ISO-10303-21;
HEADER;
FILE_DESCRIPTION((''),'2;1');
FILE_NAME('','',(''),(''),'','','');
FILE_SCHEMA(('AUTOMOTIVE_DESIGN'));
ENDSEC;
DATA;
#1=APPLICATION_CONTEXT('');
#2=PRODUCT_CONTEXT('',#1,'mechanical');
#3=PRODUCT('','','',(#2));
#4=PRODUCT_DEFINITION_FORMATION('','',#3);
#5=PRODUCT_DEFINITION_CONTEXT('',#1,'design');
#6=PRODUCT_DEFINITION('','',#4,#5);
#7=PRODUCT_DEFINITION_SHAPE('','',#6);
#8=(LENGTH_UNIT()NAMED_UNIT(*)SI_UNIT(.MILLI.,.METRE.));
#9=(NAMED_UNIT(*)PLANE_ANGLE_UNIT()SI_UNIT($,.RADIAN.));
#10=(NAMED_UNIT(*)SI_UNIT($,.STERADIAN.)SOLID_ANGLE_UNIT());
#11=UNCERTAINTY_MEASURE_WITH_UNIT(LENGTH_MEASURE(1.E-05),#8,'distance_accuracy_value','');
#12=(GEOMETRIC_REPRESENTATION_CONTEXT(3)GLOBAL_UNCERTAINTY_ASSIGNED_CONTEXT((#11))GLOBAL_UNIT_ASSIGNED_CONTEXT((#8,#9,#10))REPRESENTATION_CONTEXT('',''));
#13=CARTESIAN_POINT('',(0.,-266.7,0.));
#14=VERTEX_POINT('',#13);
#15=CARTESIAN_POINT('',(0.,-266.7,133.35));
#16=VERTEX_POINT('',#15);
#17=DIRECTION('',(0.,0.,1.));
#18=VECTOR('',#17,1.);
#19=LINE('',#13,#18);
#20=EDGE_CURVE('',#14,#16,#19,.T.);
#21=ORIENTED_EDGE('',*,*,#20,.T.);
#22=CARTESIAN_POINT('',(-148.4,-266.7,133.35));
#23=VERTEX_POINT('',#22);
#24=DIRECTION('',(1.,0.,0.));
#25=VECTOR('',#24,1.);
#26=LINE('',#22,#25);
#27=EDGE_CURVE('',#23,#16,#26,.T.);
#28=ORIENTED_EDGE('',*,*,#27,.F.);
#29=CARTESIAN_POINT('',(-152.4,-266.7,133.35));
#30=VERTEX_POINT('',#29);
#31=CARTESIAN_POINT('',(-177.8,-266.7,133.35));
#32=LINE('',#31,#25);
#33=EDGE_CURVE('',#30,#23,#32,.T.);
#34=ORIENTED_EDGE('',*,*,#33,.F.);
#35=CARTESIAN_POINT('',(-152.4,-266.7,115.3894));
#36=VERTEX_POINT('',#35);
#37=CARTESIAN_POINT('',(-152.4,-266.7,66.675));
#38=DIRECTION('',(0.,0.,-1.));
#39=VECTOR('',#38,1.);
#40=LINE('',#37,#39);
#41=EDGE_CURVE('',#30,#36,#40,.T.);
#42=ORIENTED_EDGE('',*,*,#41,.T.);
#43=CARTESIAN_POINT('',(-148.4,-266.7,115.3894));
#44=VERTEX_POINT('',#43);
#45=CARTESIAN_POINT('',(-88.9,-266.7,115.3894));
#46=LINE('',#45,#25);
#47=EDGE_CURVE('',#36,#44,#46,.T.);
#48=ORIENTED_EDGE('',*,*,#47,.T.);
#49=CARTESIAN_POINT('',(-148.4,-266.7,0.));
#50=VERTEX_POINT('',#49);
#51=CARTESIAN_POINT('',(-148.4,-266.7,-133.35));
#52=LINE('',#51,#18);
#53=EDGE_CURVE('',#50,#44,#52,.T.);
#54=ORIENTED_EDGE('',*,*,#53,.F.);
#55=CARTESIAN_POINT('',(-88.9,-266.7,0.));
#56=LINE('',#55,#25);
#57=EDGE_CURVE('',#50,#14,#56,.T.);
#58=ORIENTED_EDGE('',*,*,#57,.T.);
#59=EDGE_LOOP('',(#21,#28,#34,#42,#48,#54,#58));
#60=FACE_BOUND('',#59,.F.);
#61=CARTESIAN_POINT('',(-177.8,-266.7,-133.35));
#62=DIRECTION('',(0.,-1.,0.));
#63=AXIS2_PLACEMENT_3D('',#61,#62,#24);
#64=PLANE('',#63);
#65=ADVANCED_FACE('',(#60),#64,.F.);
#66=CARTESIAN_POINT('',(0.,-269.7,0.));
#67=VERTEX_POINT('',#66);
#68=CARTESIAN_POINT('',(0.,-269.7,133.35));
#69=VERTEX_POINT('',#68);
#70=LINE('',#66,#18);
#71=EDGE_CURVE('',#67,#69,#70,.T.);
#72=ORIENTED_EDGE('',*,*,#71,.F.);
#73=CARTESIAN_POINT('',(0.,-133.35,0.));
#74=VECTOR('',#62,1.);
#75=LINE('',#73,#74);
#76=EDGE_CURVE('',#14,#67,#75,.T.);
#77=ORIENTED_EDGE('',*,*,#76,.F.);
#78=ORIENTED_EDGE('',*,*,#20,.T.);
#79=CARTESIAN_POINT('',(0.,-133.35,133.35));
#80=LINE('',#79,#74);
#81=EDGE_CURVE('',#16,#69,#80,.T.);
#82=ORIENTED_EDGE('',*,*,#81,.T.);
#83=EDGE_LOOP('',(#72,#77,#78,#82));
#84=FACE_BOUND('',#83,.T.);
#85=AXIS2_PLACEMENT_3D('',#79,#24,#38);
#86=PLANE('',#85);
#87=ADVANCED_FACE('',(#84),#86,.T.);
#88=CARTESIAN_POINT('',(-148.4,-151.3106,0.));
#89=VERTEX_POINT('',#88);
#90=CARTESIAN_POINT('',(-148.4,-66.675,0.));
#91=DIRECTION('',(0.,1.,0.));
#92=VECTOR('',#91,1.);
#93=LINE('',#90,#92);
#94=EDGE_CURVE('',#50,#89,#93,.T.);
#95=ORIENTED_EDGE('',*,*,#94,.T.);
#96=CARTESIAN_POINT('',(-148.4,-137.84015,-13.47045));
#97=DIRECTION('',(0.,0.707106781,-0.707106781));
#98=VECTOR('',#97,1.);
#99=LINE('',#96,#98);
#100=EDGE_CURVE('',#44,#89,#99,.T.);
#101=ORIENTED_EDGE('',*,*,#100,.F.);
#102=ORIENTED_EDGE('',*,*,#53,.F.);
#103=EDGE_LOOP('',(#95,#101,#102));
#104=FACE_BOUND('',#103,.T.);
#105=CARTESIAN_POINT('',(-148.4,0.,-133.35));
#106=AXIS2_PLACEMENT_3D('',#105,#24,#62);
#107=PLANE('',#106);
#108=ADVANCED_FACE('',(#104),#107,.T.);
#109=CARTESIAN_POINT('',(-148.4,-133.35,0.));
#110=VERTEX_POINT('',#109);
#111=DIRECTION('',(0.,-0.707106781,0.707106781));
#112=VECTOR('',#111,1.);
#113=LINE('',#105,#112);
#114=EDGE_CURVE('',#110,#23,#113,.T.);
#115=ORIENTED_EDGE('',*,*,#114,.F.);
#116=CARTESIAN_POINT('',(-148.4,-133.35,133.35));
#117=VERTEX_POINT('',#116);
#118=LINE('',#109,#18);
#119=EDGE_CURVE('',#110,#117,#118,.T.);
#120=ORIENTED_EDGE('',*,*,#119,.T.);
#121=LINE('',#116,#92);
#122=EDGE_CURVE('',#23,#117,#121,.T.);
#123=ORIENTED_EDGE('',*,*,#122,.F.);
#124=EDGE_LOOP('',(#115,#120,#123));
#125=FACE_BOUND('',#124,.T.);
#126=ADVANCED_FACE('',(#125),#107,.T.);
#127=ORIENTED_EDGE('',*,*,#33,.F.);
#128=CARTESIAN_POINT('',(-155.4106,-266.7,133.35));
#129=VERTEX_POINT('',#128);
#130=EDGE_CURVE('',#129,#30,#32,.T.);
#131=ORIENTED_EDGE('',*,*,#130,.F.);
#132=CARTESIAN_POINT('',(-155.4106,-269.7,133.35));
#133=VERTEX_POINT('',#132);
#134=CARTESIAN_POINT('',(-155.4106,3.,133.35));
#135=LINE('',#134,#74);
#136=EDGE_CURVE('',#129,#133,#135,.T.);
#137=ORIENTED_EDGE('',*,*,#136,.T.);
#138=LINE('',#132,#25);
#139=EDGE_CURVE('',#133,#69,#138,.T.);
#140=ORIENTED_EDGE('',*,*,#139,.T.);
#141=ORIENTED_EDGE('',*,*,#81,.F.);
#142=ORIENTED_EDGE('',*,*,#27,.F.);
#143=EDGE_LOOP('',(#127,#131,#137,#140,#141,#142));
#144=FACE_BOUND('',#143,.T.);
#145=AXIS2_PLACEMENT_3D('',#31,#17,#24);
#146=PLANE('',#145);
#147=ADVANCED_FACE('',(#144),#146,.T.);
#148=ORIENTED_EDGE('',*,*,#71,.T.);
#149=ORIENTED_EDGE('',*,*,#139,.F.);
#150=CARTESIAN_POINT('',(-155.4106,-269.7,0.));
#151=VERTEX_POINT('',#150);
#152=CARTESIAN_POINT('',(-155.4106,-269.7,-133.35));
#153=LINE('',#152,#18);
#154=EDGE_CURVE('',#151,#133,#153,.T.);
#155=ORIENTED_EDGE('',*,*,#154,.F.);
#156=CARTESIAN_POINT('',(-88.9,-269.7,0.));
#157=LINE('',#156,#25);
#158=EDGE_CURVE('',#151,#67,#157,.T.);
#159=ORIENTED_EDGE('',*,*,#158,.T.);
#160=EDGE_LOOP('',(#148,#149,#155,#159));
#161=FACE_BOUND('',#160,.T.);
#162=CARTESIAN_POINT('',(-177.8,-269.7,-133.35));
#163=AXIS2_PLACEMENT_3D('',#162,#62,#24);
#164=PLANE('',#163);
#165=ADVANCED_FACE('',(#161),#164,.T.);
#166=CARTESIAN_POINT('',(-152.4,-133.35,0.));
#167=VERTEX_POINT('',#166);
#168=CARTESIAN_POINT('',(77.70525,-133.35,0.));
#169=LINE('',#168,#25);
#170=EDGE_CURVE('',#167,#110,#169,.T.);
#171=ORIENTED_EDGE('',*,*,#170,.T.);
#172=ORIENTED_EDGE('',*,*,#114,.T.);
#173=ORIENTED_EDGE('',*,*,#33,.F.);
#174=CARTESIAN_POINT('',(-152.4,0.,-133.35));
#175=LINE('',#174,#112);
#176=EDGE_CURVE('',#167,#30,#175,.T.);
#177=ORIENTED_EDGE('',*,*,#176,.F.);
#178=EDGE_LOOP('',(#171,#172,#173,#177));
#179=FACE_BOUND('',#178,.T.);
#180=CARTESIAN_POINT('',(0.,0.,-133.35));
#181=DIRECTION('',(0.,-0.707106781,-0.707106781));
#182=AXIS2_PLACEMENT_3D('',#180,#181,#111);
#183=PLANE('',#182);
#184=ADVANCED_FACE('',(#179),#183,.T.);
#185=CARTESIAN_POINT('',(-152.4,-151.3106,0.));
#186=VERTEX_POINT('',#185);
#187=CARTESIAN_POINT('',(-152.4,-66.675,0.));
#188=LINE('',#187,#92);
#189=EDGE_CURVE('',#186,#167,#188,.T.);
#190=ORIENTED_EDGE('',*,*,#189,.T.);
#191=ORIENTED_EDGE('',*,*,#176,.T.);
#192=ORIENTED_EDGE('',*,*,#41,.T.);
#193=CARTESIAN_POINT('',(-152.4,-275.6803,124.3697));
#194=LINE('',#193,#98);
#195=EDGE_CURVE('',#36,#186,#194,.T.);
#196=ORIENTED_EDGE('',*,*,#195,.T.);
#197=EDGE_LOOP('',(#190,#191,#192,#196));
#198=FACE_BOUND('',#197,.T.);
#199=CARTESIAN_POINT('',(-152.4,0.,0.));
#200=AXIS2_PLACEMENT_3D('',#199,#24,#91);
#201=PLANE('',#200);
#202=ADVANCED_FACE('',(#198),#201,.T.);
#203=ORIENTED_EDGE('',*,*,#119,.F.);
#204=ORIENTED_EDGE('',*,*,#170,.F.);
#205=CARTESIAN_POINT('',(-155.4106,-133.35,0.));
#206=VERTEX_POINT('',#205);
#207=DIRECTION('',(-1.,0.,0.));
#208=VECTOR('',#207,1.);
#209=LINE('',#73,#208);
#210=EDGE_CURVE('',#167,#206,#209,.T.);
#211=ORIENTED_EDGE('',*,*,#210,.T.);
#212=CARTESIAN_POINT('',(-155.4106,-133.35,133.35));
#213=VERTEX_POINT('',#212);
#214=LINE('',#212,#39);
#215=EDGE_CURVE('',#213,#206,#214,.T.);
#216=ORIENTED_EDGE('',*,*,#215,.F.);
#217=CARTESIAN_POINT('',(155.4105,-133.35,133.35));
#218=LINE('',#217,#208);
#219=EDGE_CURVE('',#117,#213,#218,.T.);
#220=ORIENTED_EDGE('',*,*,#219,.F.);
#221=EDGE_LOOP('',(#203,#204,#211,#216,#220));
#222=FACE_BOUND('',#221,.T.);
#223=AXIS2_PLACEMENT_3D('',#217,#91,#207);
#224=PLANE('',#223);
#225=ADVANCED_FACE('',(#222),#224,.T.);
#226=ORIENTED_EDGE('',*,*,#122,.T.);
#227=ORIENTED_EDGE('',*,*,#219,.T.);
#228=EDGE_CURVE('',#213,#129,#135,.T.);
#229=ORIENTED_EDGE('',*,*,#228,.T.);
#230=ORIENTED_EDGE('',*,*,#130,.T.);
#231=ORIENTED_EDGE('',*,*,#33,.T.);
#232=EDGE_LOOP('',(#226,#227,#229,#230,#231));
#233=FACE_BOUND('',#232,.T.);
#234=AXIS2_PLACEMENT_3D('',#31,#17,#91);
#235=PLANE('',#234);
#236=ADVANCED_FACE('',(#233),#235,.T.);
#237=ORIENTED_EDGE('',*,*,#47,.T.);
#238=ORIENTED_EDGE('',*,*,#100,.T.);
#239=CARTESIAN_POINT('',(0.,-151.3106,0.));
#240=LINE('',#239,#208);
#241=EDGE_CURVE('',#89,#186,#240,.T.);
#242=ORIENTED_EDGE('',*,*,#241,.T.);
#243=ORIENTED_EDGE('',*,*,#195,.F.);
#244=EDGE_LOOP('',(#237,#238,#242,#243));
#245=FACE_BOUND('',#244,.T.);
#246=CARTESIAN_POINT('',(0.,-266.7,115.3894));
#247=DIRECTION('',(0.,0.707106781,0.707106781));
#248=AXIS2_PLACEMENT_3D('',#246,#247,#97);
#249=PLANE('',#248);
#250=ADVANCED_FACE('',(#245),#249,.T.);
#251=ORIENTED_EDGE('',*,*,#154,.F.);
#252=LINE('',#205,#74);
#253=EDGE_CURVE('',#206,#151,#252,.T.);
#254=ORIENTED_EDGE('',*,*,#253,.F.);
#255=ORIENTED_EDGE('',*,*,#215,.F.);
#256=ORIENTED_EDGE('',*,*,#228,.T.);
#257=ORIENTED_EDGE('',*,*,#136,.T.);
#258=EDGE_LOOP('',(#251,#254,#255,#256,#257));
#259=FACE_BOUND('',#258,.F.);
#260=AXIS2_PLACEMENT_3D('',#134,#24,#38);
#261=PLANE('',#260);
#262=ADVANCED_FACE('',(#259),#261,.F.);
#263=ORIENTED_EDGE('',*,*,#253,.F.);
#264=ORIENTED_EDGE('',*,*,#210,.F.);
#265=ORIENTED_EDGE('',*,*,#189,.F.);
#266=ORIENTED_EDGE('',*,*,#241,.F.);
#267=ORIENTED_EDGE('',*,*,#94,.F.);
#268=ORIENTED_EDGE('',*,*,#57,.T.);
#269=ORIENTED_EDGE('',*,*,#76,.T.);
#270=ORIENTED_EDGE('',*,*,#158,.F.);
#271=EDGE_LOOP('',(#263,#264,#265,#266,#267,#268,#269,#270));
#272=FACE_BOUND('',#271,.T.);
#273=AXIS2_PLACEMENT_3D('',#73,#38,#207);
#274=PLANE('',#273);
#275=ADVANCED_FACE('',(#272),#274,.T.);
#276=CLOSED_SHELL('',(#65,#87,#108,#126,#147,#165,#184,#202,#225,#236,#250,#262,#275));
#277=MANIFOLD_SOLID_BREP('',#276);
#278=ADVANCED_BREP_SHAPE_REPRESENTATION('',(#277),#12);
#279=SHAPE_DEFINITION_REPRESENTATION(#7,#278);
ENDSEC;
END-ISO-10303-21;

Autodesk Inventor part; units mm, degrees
ref_plane "YZ Plane" through (0, 0, 0) normal (1, 0, 0) x (0, 1, 0)
ref_plane "XZ Plane" through (0, 0, 0) normal (0, 1, 0) x (-1, 0, 0)
ref_plane "XY Plane" through (0, 0, 0) normal (0, 0, 1) x (1, 0, 0)
sketch "Sketch1" plane through (0, 0, 0) normal (0, 1, 0) x (-1, 0, 0)
  line L0 (110, -80) -> (-110, -80)
  line L1 (-110, -80) -> (-110, 80)
  line L2 (-110, 80) -> (110, 80)
  line L3 (110, 80) -> (110, -80)
  line L4 (320.2117, -53.5522) -> (168.036, -53.5522) construction
  line L5 (168.036, -53.5522) -> (168.036, 90.1689) construction
  line L6 (168.036, 90.1689) -> (320.2117, 90.1689) construction
  line L7 (320.2117, 90.1689) -> (320.2117, -53.5522) construction
  line L8 (124.3, -89.75) -> (-124.3, -89.75) construction
  line L9 (-124.3, -89.75) -> (-124.3, 89.75) construction
  line L10 (-124.3, 89.75) -> (124.3, 89.75) construction
  line L11 (124.3, 89.75) -> (124.3, -89.75) construction
  line L12 (124.3, -89.75) -> (-124.3, 89.75) construction
  line L13 (-124.3, -89.75) -> (124.3, 89.75) construction
  line L14 (-152.4, -107.95) -> (152.4, -107.95)
  line L15 (152.4, -107.95) -> (152.4, 107.95)
  line L16 (152.4, 107.95) -> (-152.4, 107.95)
  line L17 (-152.4, 107.95) -> (-152.4, -107.95)
  line L18 (-152.4, -107.95) -> (152.4, 107.95) construction
  line L19 (152.4, -107.95) -> (-152.4, 107.95) construction
  line L20 (177.8, 133.35) -> (177.8, -133.35)
  line L21 (177.8, -133.35) -> (-177.8, -133.35)
  line L22 (-177.8, -133.35) -> (-177.8, 133.35)
  line L23 (-177.8, 133.35) -> (177.8, 133.35)
  point P0 (0, 0)
  dimension "d11" = 220
  dimension "d12" = 160
  dimension "d15" = 248.6
  dimension "d16" = 179.5
  dimension "d18" = 304.8
  dimension "d19" = 215.9
  dimension "d22" = 25.4
extrude "Top" add sketch "Sketch1" along normal blind 25.4 contours L17 L16 L15 L14 | L20 L21 L22 L23
sketch "Sketch3" plane through (177.8, 0, 133.35) normal (1, 0, 0) x (0, 0, -1)
  line L0 (0, 0) -> (0, 25.4) projected
  line L1 (266.7, 0) -> (266.7, 25.4) projected
  line L2 (0, 0) -> (266.7, 0)
  line L3 (266.7, 0) -> (266.7, -266.7)
  line L4 (266.7, -266.7) -> (0, -266.7)
  line L5 (0, -266.7) -> (0, 0)
  point P0 (133.35, 0)
  dimension "d25" = 266.7
extrude "Right" add sketch "Sketch3" against normal blind 50.8
sketch "Sketch4" plane through (-177.8, 0, -133.35) normal (-1, 0, 0) x (0, 0, 1)
  line L0 (0, 0) -> (0, 25.4) projected
  line L1 (266.7, -266.7) -> (266.7, 0) projected
  line L2 (0, 0) -> (266.7, 0)
  line L3 (266.7, 0) -> (266.7, -266.7)
  line L4 (266.7, -266.7) -> (0, -266.7)
  line L5 (0, -266.7) -> (0, 0)
  point P0 (133.35, 0)
  dimension "d28" = 266.7
extrude "Left" add sketch "Sketch4" against normal blind 50.8
sketch "Sketch5" plane through (0, 0, 0) normal (1, 0, 0) x (0, 1, 0)
  line L0 (-266.7, -133.35) -> (25.4, -133.35) projected
  line L1 (-266.7, 133.35) -> (-266.7, -133.35) projected
  line L2 (0, -133.35) -> (-266.7, 133.35)
  line L3 (-266.7, 133.35) -> (-275.6803, 124.3697)
  line L4 (-275.6803, 124.3697) -> (-8.9803, -142.3303)
  line L5 (-8.9803, -142.3303) -> (0, -133.35)
  point P0 (0, 0)
  dimension "d31" = 12.7
extrude "Plexiglass Cut" cut sketch "Sketch5" along normal mid plane 304.8 contours L4 L1 L2 L0 | L0 L5 L4 | L4 L3 L1
sketch "Sketch6" plane through (-177.8, -266.7, -133.35) normal (0, -1, 0) x (1, 0, 0)
  line L0 (0, 0) -> (0, 266.7) projected
  line L1 (355.6, 0) -> (0, 0) projected
  line L2 (0, 266.7) -> (355.6, 266.7)
  line L3 (355.6, 266.7) -> (355.6, 0)
  line L4 (355.6, 0) -> (0, 0)
  line L5 (0, 0) -> (0, 266.7)
  point P0 (177.8, 133.35)
extrude "Bottom" add sketch "Sketch6" along normal blind 25.4
sketch "Sketch9" plane through (0, 25.4, 0) normal (0, 1, 0) x (1, 0, 0)
  line L0 (177.8, -133.35) -> (127, -133.35) projected
  line L1 (177.8, 133.35) -> (-177.8, 133.35) projected
  line L2 (177.8, -133.35) -> (-177.8, -133.35)
  line L3 (-177.8, -133.35) -> (-177.8, 133.35)
  line L4 (-177.8, 133.35) -> (177.8, 133.35)
  line L5 (177.8, 133.35) -> (177.8, -133.35)
  point P0 (0, 0)
extrude "Top Flattening" cut sketch "Sketch9" against normal blind 22.4
sketch "Sketch10" plane through (0, 3, 0) normal (0, 1, 0) x (1, 0, 0)
  line L0 (-177.8, -133.35) -> (-177.8, 133.35) projected
  line L1 (-155.4106, 133.35) -> (-177.8, 133.35)
  line L2 (-177.8, 133.35) -> (-177.8, -133.35)
  line L3 (-177.8, -133.35) -> (-155.4106, -133.35)
  line L4 (-155.4106, -133.35) -> (-155.4106, 133.35)
  line L5 (177.8, 133.35) -> (177.8, -133.35)
  line L6 (177.8, -133.35) -> (155.4106, -133.35)
  line L7 (155.4106, -133.35) -> (155.4106, 133.35)
  line L8 (155.4106, 133.35) -> (177.8, 133.35)
  line L9 (152.4, -115.3895) -> (152.4, 133.35) projected
  point P0 (0, 0)
  point P1 (-177.8, 0)
  dimension "d48" = 22.3894
  dimension "d49" = 22.3894
extrude "Outer Side Flattening" cut sketch "Sketch10" against normal through all
sketch "Sketch11" plane through (-177.8, -292.1, -133.35) normal (0, -1, 0) x (1, 0, 0)
  line L0 (22.3894, 0) -> (333.2106, 0) projected
  line L1 (333.2106, 0) -> (22.3894, 0)
  line L2 (22.3894, 0) -> (22.3894, 266.7)
  line L3 (22.3894, 266.7) -> (333.2106, 266.7)
  line L4 (333.2106, 266.7) -> (333.2106, 0)
  point P0 (177.8, 133.35)
extrude "Bottom Flattening" cut sketch "Sketch11" against normal blind 22.4
sketch "Sketch12" plane through (155.4106, 3, -133.35) normal (0, 0, -1) x (-1, 0, 0)
  line L0 (155.4106, -3) -> (155.4106, -269.7) construction
  line L1 (7.0106, -269.7) -> (7.0106, -3)
  line L2 (7.0106, -3) -> (303.8106, -3)
  line L3 (303.8106, -3) -> (303.8106, -269.7)
  line L4 (303.8106, -269.7) -> (7.0106, -269.7)
  line L5 (7.0106, -269.7) -> (303.8106, -3) construction
  line L6 (7.0106, -3) -> (303.8106, -269.7) construction
  point P0 (155.4106, -136.35)
  point P1 (155.4106, -3)
  dimension "d54" = 296.8
extrude "Inner Flattening" cut sketch "Sketch12" against normal through all
sketch "Sketch13" plane through (-155.4106, 3, 133.35) normal (0, 0, 1) x (1, 0, 0)
  line L0 (310.8211, -272.7) -> (310.8211, 0) projected
  line L1 (0, -272.7) -> (0, 0) projected
  line L2 (310.8211, -136.35) -> (0, -136.35)
  line L3 (0, -136.35) -> (0, 0)
  line L4 (0, 0) -> (310.8211, 0)
  line L5 (310.8211, 0) -> (310.8211, -136.35)
  point P0 (155.4106, -3)
  point P1 (310.8211, 0)
  point P2 (0, -136.35)
extrude "Top Cut" cut sketch "Sketch13" against normal through all
sketch "Sketch14" plane through (-155.4106, -133.35, 133.35) normal (0, 1, 0) x (1, 0, 0)
  line L0 (155.4106, 133.35) -> (0, 133.35)
  line L1 (0, 133.35) -> (0, 0)
  line L2 (0, 0) -> (155.4106, 0)
  line L3 (155.4106, 0) -> (155.4106, 133.35)
  line L4 (310.8211, 266.7) -> (310.8212, 0) projected
  line L5 (0, 0) -> (310.8211, 0)
  line L6 (310.8211, 0) -> (310.8211, 266.7)
  line L7 (310.8211, 266.7) -> (0, 266.7)
  line L8 (0, 266.7) -> (0, 0)
extrude "Quarter Cut" cut sketch "Sketch14" against normal through all contours L0 L8 L7 L4 L5 L3
properties part number "Apple iPad 2022 Hologram"
